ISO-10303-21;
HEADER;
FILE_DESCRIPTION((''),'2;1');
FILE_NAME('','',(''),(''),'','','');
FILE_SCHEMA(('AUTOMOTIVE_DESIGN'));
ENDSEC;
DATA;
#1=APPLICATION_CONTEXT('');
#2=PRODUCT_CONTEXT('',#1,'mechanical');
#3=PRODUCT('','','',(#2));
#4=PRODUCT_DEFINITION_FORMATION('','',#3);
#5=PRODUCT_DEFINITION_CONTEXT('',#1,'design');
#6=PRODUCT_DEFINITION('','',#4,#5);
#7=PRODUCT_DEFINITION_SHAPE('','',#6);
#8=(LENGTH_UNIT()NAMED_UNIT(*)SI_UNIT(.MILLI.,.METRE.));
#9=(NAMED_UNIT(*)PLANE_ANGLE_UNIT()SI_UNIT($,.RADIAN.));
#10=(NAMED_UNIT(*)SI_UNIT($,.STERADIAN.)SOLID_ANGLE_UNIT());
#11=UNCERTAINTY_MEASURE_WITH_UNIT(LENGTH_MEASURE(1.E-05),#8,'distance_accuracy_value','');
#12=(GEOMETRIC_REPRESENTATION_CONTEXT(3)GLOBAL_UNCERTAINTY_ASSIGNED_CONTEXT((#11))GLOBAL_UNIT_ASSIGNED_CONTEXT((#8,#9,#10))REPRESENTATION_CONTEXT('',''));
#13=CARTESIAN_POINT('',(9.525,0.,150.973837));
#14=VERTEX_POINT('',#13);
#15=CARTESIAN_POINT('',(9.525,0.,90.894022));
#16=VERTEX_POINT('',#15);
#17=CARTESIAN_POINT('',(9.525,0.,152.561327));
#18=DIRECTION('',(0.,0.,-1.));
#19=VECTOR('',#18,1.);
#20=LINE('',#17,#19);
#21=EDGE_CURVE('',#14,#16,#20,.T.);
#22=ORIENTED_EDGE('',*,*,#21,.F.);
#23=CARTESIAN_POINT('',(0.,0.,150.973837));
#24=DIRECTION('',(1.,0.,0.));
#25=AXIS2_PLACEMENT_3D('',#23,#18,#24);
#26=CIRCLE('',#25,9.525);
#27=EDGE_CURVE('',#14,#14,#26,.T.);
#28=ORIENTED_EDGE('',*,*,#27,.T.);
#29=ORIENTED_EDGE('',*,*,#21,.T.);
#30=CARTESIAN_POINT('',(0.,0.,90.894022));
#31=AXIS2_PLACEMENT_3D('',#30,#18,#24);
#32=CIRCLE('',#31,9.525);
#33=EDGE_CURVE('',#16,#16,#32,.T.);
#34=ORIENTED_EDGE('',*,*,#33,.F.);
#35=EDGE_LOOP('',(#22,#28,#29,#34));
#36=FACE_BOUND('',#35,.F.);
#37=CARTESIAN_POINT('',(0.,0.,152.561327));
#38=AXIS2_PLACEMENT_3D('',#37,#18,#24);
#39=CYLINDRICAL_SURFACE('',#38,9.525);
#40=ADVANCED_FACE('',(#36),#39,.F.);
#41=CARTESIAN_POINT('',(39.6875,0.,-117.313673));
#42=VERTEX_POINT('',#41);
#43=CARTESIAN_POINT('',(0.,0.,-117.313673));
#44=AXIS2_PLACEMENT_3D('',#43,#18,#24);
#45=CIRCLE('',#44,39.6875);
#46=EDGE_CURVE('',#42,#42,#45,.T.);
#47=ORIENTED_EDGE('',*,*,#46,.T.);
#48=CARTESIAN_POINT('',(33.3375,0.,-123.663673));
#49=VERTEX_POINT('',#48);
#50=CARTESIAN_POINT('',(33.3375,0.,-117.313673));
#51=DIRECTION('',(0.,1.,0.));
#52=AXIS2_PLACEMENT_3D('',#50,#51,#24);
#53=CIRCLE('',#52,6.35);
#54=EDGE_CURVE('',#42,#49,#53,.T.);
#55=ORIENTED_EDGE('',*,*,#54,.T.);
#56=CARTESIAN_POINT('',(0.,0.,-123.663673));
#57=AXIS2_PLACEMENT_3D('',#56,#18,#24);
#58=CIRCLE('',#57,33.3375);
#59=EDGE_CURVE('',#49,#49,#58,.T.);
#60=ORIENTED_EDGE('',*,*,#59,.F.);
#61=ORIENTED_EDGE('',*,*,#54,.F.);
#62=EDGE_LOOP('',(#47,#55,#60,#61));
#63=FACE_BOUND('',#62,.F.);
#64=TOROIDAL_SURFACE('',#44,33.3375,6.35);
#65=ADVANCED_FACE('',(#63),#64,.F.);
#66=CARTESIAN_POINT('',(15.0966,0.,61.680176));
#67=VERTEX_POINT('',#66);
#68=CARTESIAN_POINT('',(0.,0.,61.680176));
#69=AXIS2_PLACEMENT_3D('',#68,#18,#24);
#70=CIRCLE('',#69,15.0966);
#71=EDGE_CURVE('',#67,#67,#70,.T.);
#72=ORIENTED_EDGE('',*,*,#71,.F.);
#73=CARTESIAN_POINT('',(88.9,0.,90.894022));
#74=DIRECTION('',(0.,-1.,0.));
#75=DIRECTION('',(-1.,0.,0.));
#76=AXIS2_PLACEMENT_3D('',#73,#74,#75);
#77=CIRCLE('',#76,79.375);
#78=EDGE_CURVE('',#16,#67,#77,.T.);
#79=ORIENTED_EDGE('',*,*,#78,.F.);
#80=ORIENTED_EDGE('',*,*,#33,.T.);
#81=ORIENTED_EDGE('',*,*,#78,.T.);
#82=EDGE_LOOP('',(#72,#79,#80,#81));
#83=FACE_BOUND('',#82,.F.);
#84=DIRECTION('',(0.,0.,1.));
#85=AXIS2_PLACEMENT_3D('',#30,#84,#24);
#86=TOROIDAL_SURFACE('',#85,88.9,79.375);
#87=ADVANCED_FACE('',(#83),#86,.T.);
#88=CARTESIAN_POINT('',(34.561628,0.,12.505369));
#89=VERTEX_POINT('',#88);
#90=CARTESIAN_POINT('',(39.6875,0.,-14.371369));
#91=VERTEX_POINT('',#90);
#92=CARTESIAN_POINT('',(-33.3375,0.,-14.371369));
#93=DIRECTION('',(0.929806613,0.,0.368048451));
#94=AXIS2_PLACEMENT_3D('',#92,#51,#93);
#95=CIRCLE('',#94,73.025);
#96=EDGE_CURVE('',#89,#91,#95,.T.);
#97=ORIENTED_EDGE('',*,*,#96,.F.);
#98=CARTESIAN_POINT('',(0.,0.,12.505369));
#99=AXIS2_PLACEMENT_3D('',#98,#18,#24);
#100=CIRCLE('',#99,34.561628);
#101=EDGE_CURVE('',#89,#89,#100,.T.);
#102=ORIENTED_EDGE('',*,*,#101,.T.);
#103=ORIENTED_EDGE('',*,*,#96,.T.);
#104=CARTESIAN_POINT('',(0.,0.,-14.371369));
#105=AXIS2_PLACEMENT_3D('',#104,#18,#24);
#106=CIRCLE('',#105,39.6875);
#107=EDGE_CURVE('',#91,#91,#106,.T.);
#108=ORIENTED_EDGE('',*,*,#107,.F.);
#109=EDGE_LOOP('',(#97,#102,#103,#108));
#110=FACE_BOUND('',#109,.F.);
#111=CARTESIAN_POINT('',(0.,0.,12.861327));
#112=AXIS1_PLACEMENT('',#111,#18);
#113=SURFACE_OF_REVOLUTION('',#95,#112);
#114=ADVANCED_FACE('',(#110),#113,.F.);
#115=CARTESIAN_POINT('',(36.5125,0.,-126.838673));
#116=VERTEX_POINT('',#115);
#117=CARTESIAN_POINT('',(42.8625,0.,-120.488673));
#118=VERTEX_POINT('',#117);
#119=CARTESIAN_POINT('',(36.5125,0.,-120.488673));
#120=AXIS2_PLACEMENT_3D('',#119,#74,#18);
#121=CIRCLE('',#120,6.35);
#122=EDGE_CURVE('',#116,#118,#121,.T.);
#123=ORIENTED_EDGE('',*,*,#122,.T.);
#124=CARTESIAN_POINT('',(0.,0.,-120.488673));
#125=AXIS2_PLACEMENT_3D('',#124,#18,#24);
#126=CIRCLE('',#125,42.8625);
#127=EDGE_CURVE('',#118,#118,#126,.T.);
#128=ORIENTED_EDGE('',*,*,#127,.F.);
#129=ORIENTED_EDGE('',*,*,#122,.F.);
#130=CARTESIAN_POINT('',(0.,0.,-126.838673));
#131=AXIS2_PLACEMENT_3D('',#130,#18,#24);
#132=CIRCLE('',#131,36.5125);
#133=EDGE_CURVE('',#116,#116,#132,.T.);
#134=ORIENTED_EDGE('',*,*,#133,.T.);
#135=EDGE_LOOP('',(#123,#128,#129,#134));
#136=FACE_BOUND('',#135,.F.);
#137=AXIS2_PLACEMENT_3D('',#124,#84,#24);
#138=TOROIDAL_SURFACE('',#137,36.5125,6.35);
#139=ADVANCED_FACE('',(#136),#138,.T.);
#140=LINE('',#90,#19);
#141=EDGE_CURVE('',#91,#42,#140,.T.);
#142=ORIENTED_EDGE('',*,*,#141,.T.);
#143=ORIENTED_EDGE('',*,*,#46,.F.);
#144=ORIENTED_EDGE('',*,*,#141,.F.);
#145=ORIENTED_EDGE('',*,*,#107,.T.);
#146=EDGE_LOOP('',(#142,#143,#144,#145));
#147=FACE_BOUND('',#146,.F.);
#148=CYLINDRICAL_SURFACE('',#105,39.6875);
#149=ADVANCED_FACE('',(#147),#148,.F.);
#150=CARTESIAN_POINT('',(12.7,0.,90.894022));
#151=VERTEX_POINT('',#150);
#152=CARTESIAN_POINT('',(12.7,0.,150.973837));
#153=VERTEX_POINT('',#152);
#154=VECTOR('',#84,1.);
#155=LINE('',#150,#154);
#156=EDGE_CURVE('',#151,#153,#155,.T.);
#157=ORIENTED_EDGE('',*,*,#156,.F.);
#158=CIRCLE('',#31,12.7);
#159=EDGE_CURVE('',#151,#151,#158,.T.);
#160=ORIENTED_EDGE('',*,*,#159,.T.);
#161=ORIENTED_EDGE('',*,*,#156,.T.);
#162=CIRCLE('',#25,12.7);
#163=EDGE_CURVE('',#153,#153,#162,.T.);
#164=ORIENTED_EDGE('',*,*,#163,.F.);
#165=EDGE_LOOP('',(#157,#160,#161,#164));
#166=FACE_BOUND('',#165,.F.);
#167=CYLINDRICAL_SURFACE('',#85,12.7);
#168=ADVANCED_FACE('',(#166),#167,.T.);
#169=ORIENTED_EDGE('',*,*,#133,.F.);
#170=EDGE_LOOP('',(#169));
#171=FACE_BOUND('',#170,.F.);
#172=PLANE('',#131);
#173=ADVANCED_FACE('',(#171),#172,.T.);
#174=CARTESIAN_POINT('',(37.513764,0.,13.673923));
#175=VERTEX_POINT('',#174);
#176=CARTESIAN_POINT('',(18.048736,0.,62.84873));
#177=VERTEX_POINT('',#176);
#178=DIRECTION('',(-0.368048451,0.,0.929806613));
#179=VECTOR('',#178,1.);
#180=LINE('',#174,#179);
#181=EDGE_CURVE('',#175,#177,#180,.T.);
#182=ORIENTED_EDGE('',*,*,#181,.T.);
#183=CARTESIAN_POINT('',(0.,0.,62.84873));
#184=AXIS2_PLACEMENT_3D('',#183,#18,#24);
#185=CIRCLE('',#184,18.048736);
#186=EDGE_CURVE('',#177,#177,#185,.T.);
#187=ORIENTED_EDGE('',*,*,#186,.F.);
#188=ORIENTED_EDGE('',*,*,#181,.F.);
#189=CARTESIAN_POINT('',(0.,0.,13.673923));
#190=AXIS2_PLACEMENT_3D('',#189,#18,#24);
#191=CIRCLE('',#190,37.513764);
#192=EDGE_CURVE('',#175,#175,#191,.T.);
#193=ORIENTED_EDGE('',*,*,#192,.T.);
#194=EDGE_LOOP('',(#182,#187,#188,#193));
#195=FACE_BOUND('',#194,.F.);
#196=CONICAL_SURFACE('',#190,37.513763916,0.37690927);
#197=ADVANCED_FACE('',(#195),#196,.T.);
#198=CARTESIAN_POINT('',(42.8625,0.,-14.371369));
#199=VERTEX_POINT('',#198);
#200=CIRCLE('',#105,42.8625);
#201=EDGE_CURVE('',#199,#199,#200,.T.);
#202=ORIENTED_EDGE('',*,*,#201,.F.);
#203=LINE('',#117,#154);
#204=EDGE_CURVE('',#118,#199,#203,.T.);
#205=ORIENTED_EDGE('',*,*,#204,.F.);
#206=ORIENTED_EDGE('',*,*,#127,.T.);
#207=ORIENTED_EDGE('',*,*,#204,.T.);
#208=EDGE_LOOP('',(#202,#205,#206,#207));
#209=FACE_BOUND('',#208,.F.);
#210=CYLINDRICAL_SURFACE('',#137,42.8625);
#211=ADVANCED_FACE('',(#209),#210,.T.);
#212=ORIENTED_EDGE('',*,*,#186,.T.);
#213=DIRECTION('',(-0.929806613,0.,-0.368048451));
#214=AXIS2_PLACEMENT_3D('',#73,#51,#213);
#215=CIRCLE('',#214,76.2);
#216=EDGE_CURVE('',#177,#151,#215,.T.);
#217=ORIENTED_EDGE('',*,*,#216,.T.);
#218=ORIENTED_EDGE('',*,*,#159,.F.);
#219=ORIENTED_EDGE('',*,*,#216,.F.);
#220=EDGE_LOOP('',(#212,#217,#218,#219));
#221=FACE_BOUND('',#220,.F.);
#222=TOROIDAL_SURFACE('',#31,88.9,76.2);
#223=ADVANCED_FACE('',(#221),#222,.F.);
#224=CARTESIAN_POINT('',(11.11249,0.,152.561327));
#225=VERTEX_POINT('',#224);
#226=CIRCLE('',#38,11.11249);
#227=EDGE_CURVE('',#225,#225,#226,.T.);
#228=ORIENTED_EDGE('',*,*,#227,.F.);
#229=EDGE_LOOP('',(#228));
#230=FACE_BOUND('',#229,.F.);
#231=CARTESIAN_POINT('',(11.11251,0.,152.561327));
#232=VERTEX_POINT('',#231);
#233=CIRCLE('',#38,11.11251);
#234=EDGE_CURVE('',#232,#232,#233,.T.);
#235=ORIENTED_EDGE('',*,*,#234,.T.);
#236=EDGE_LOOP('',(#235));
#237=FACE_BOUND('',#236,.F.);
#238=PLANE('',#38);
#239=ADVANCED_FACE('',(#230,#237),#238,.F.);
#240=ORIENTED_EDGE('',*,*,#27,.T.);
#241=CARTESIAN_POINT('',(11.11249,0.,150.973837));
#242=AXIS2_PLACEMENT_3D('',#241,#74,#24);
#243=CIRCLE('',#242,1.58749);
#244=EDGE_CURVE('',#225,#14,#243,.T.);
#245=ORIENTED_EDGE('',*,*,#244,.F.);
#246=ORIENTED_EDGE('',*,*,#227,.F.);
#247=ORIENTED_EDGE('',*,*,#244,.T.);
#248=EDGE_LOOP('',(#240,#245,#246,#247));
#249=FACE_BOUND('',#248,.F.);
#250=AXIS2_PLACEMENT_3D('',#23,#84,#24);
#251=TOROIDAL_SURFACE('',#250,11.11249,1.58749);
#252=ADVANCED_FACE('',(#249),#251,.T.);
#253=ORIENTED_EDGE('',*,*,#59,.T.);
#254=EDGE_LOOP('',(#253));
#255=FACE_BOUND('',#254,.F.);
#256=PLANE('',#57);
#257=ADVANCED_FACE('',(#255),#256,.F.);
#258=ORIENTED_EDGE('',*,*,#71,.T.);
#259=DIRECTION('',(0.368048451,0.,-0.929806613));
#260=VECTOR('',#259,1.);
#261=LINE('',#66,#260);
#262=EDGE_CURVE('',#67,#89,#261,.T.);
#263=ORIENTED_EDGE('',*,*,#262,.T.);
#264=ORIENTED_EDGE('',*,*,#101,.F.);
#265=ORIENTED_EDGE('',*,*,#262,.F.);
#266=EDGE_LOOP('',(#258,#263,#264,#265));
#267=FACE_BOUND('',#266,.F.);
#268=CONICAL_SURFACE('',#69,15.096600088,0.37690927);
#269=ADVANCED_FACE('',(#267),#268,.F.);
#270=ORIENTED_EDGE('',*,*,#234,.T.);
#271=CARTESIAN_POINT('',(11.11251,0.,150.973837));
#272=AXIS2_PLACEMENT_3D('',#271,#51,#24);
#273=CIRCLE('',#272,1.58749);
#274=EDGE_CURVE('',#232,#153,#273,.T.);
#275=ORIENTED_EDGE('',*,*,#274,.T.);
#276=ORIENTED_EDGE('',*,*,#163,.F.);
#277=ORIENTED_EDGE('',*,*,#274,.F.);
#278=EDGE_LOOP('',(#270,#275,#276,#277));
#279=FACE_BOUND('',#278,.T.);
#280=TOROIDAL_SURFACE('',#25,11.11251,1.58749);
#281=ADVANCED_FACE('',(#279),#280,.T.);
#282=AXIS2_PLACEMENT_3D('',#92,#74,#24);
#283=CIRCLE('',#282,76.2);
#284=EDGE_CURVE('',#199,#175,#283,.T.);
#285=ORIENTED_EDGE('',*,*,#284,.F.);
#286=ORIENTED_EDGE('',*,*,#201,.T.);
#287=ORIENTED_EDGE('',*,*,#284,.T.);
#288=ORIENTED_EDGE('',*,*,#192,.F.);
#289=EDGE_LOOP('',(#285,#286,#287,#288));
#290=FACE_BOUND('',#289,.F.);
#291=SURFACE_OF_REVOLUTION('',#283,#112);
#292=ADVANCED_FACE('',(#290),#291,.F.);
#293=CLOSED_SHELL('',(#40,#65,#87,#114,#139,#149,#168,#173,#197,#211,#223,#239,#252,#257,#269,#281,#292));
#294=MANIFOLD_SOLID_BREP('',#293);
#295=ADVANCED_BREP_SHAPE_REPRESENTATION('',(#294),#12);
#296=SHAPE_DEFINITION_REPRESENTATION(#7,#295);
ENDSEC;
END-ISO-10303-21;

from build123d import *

# Parameters (mm, degrees)
F2_R = 1.58749


# Not quite as in the source:
# - a fillet or chamfer is up to 0.001 mm smaller than in the source, because OpenCascade refuses the exact size


with BuildPart() as f1:
    # F0 (on Front) → F1 (revolve)
    with BuildSketch(Plane.XZ):
        with BuildLine():
            Line((12.7, 152.5613266138), (9.525, 152.5613266138))
            Line((9.525, 152.5613266138), (9.525, 90.8940221579))
            ThreePointArc((9.525, 90.8940221579), (10.9303408592, 76.0238211347), (15.0966000875, 61.6801763592))
            Line((15.0966000875, 61.6801763592), (34.5616279195, 12.5053692045))
            ThreePointArc((34.5616279195, 12.5053692045), (38.3945864095, -0.6907839889), (39.6875, -14.3713689303))
            Line((39.6875, -14.3713689303), (39.6875, -117.3136733862))
            ThreePointArc((39.6875, -117.3136733862), (37.8276280605, -121.8038014467), (33.3375, -123.6636733862))
            Line((33.3375, -123.6636733862), (0, -123.6636733862))
            Line((0, -123.6636733862), (0, -126.8386733862))
            Line((0, -126.8386733862), (36.5125, -126.8386733862))
            ThreePointArc((36.5125, -126.8386733862), (41.0026280605, -124.9788014467), (42.8625, -120.4886733862))
            Line((42.8625, -120.4886733862), (42.8625, -14.3713689303))
            ThreePointArc((42.8625, -14.3713689303), (41.5133727751, -0.095975948), (37.513763916, 13.6739230365))
            Line((37.513763916, 13.6739230365), (18.048736084, 62.8487301912))
            ThreePointArc((18.048736084, 62.8487301912), (14.0491272249, 76.6186291756), (12.7, 90.8940221579))
            Line((12.7, 90.8940221579), (12.7, 152.5613266138))
        make_face()
    revolve(axis=Axis((0, 0, 12.8613266138), (0, 0, -1)))

    # F2 (radius 1.5875 in the source; OpenCascade refuses exactly that, so slightly less here)
    f2_edges = [f1.edges().sort_by_distance(p)[0] for p in [
        (-12.7, 0, 152.561327),
        (-9.525, 0, 152.561327),
    ]]
    fillet(f2_edges, radius=F2_R)


solid = f1.part
